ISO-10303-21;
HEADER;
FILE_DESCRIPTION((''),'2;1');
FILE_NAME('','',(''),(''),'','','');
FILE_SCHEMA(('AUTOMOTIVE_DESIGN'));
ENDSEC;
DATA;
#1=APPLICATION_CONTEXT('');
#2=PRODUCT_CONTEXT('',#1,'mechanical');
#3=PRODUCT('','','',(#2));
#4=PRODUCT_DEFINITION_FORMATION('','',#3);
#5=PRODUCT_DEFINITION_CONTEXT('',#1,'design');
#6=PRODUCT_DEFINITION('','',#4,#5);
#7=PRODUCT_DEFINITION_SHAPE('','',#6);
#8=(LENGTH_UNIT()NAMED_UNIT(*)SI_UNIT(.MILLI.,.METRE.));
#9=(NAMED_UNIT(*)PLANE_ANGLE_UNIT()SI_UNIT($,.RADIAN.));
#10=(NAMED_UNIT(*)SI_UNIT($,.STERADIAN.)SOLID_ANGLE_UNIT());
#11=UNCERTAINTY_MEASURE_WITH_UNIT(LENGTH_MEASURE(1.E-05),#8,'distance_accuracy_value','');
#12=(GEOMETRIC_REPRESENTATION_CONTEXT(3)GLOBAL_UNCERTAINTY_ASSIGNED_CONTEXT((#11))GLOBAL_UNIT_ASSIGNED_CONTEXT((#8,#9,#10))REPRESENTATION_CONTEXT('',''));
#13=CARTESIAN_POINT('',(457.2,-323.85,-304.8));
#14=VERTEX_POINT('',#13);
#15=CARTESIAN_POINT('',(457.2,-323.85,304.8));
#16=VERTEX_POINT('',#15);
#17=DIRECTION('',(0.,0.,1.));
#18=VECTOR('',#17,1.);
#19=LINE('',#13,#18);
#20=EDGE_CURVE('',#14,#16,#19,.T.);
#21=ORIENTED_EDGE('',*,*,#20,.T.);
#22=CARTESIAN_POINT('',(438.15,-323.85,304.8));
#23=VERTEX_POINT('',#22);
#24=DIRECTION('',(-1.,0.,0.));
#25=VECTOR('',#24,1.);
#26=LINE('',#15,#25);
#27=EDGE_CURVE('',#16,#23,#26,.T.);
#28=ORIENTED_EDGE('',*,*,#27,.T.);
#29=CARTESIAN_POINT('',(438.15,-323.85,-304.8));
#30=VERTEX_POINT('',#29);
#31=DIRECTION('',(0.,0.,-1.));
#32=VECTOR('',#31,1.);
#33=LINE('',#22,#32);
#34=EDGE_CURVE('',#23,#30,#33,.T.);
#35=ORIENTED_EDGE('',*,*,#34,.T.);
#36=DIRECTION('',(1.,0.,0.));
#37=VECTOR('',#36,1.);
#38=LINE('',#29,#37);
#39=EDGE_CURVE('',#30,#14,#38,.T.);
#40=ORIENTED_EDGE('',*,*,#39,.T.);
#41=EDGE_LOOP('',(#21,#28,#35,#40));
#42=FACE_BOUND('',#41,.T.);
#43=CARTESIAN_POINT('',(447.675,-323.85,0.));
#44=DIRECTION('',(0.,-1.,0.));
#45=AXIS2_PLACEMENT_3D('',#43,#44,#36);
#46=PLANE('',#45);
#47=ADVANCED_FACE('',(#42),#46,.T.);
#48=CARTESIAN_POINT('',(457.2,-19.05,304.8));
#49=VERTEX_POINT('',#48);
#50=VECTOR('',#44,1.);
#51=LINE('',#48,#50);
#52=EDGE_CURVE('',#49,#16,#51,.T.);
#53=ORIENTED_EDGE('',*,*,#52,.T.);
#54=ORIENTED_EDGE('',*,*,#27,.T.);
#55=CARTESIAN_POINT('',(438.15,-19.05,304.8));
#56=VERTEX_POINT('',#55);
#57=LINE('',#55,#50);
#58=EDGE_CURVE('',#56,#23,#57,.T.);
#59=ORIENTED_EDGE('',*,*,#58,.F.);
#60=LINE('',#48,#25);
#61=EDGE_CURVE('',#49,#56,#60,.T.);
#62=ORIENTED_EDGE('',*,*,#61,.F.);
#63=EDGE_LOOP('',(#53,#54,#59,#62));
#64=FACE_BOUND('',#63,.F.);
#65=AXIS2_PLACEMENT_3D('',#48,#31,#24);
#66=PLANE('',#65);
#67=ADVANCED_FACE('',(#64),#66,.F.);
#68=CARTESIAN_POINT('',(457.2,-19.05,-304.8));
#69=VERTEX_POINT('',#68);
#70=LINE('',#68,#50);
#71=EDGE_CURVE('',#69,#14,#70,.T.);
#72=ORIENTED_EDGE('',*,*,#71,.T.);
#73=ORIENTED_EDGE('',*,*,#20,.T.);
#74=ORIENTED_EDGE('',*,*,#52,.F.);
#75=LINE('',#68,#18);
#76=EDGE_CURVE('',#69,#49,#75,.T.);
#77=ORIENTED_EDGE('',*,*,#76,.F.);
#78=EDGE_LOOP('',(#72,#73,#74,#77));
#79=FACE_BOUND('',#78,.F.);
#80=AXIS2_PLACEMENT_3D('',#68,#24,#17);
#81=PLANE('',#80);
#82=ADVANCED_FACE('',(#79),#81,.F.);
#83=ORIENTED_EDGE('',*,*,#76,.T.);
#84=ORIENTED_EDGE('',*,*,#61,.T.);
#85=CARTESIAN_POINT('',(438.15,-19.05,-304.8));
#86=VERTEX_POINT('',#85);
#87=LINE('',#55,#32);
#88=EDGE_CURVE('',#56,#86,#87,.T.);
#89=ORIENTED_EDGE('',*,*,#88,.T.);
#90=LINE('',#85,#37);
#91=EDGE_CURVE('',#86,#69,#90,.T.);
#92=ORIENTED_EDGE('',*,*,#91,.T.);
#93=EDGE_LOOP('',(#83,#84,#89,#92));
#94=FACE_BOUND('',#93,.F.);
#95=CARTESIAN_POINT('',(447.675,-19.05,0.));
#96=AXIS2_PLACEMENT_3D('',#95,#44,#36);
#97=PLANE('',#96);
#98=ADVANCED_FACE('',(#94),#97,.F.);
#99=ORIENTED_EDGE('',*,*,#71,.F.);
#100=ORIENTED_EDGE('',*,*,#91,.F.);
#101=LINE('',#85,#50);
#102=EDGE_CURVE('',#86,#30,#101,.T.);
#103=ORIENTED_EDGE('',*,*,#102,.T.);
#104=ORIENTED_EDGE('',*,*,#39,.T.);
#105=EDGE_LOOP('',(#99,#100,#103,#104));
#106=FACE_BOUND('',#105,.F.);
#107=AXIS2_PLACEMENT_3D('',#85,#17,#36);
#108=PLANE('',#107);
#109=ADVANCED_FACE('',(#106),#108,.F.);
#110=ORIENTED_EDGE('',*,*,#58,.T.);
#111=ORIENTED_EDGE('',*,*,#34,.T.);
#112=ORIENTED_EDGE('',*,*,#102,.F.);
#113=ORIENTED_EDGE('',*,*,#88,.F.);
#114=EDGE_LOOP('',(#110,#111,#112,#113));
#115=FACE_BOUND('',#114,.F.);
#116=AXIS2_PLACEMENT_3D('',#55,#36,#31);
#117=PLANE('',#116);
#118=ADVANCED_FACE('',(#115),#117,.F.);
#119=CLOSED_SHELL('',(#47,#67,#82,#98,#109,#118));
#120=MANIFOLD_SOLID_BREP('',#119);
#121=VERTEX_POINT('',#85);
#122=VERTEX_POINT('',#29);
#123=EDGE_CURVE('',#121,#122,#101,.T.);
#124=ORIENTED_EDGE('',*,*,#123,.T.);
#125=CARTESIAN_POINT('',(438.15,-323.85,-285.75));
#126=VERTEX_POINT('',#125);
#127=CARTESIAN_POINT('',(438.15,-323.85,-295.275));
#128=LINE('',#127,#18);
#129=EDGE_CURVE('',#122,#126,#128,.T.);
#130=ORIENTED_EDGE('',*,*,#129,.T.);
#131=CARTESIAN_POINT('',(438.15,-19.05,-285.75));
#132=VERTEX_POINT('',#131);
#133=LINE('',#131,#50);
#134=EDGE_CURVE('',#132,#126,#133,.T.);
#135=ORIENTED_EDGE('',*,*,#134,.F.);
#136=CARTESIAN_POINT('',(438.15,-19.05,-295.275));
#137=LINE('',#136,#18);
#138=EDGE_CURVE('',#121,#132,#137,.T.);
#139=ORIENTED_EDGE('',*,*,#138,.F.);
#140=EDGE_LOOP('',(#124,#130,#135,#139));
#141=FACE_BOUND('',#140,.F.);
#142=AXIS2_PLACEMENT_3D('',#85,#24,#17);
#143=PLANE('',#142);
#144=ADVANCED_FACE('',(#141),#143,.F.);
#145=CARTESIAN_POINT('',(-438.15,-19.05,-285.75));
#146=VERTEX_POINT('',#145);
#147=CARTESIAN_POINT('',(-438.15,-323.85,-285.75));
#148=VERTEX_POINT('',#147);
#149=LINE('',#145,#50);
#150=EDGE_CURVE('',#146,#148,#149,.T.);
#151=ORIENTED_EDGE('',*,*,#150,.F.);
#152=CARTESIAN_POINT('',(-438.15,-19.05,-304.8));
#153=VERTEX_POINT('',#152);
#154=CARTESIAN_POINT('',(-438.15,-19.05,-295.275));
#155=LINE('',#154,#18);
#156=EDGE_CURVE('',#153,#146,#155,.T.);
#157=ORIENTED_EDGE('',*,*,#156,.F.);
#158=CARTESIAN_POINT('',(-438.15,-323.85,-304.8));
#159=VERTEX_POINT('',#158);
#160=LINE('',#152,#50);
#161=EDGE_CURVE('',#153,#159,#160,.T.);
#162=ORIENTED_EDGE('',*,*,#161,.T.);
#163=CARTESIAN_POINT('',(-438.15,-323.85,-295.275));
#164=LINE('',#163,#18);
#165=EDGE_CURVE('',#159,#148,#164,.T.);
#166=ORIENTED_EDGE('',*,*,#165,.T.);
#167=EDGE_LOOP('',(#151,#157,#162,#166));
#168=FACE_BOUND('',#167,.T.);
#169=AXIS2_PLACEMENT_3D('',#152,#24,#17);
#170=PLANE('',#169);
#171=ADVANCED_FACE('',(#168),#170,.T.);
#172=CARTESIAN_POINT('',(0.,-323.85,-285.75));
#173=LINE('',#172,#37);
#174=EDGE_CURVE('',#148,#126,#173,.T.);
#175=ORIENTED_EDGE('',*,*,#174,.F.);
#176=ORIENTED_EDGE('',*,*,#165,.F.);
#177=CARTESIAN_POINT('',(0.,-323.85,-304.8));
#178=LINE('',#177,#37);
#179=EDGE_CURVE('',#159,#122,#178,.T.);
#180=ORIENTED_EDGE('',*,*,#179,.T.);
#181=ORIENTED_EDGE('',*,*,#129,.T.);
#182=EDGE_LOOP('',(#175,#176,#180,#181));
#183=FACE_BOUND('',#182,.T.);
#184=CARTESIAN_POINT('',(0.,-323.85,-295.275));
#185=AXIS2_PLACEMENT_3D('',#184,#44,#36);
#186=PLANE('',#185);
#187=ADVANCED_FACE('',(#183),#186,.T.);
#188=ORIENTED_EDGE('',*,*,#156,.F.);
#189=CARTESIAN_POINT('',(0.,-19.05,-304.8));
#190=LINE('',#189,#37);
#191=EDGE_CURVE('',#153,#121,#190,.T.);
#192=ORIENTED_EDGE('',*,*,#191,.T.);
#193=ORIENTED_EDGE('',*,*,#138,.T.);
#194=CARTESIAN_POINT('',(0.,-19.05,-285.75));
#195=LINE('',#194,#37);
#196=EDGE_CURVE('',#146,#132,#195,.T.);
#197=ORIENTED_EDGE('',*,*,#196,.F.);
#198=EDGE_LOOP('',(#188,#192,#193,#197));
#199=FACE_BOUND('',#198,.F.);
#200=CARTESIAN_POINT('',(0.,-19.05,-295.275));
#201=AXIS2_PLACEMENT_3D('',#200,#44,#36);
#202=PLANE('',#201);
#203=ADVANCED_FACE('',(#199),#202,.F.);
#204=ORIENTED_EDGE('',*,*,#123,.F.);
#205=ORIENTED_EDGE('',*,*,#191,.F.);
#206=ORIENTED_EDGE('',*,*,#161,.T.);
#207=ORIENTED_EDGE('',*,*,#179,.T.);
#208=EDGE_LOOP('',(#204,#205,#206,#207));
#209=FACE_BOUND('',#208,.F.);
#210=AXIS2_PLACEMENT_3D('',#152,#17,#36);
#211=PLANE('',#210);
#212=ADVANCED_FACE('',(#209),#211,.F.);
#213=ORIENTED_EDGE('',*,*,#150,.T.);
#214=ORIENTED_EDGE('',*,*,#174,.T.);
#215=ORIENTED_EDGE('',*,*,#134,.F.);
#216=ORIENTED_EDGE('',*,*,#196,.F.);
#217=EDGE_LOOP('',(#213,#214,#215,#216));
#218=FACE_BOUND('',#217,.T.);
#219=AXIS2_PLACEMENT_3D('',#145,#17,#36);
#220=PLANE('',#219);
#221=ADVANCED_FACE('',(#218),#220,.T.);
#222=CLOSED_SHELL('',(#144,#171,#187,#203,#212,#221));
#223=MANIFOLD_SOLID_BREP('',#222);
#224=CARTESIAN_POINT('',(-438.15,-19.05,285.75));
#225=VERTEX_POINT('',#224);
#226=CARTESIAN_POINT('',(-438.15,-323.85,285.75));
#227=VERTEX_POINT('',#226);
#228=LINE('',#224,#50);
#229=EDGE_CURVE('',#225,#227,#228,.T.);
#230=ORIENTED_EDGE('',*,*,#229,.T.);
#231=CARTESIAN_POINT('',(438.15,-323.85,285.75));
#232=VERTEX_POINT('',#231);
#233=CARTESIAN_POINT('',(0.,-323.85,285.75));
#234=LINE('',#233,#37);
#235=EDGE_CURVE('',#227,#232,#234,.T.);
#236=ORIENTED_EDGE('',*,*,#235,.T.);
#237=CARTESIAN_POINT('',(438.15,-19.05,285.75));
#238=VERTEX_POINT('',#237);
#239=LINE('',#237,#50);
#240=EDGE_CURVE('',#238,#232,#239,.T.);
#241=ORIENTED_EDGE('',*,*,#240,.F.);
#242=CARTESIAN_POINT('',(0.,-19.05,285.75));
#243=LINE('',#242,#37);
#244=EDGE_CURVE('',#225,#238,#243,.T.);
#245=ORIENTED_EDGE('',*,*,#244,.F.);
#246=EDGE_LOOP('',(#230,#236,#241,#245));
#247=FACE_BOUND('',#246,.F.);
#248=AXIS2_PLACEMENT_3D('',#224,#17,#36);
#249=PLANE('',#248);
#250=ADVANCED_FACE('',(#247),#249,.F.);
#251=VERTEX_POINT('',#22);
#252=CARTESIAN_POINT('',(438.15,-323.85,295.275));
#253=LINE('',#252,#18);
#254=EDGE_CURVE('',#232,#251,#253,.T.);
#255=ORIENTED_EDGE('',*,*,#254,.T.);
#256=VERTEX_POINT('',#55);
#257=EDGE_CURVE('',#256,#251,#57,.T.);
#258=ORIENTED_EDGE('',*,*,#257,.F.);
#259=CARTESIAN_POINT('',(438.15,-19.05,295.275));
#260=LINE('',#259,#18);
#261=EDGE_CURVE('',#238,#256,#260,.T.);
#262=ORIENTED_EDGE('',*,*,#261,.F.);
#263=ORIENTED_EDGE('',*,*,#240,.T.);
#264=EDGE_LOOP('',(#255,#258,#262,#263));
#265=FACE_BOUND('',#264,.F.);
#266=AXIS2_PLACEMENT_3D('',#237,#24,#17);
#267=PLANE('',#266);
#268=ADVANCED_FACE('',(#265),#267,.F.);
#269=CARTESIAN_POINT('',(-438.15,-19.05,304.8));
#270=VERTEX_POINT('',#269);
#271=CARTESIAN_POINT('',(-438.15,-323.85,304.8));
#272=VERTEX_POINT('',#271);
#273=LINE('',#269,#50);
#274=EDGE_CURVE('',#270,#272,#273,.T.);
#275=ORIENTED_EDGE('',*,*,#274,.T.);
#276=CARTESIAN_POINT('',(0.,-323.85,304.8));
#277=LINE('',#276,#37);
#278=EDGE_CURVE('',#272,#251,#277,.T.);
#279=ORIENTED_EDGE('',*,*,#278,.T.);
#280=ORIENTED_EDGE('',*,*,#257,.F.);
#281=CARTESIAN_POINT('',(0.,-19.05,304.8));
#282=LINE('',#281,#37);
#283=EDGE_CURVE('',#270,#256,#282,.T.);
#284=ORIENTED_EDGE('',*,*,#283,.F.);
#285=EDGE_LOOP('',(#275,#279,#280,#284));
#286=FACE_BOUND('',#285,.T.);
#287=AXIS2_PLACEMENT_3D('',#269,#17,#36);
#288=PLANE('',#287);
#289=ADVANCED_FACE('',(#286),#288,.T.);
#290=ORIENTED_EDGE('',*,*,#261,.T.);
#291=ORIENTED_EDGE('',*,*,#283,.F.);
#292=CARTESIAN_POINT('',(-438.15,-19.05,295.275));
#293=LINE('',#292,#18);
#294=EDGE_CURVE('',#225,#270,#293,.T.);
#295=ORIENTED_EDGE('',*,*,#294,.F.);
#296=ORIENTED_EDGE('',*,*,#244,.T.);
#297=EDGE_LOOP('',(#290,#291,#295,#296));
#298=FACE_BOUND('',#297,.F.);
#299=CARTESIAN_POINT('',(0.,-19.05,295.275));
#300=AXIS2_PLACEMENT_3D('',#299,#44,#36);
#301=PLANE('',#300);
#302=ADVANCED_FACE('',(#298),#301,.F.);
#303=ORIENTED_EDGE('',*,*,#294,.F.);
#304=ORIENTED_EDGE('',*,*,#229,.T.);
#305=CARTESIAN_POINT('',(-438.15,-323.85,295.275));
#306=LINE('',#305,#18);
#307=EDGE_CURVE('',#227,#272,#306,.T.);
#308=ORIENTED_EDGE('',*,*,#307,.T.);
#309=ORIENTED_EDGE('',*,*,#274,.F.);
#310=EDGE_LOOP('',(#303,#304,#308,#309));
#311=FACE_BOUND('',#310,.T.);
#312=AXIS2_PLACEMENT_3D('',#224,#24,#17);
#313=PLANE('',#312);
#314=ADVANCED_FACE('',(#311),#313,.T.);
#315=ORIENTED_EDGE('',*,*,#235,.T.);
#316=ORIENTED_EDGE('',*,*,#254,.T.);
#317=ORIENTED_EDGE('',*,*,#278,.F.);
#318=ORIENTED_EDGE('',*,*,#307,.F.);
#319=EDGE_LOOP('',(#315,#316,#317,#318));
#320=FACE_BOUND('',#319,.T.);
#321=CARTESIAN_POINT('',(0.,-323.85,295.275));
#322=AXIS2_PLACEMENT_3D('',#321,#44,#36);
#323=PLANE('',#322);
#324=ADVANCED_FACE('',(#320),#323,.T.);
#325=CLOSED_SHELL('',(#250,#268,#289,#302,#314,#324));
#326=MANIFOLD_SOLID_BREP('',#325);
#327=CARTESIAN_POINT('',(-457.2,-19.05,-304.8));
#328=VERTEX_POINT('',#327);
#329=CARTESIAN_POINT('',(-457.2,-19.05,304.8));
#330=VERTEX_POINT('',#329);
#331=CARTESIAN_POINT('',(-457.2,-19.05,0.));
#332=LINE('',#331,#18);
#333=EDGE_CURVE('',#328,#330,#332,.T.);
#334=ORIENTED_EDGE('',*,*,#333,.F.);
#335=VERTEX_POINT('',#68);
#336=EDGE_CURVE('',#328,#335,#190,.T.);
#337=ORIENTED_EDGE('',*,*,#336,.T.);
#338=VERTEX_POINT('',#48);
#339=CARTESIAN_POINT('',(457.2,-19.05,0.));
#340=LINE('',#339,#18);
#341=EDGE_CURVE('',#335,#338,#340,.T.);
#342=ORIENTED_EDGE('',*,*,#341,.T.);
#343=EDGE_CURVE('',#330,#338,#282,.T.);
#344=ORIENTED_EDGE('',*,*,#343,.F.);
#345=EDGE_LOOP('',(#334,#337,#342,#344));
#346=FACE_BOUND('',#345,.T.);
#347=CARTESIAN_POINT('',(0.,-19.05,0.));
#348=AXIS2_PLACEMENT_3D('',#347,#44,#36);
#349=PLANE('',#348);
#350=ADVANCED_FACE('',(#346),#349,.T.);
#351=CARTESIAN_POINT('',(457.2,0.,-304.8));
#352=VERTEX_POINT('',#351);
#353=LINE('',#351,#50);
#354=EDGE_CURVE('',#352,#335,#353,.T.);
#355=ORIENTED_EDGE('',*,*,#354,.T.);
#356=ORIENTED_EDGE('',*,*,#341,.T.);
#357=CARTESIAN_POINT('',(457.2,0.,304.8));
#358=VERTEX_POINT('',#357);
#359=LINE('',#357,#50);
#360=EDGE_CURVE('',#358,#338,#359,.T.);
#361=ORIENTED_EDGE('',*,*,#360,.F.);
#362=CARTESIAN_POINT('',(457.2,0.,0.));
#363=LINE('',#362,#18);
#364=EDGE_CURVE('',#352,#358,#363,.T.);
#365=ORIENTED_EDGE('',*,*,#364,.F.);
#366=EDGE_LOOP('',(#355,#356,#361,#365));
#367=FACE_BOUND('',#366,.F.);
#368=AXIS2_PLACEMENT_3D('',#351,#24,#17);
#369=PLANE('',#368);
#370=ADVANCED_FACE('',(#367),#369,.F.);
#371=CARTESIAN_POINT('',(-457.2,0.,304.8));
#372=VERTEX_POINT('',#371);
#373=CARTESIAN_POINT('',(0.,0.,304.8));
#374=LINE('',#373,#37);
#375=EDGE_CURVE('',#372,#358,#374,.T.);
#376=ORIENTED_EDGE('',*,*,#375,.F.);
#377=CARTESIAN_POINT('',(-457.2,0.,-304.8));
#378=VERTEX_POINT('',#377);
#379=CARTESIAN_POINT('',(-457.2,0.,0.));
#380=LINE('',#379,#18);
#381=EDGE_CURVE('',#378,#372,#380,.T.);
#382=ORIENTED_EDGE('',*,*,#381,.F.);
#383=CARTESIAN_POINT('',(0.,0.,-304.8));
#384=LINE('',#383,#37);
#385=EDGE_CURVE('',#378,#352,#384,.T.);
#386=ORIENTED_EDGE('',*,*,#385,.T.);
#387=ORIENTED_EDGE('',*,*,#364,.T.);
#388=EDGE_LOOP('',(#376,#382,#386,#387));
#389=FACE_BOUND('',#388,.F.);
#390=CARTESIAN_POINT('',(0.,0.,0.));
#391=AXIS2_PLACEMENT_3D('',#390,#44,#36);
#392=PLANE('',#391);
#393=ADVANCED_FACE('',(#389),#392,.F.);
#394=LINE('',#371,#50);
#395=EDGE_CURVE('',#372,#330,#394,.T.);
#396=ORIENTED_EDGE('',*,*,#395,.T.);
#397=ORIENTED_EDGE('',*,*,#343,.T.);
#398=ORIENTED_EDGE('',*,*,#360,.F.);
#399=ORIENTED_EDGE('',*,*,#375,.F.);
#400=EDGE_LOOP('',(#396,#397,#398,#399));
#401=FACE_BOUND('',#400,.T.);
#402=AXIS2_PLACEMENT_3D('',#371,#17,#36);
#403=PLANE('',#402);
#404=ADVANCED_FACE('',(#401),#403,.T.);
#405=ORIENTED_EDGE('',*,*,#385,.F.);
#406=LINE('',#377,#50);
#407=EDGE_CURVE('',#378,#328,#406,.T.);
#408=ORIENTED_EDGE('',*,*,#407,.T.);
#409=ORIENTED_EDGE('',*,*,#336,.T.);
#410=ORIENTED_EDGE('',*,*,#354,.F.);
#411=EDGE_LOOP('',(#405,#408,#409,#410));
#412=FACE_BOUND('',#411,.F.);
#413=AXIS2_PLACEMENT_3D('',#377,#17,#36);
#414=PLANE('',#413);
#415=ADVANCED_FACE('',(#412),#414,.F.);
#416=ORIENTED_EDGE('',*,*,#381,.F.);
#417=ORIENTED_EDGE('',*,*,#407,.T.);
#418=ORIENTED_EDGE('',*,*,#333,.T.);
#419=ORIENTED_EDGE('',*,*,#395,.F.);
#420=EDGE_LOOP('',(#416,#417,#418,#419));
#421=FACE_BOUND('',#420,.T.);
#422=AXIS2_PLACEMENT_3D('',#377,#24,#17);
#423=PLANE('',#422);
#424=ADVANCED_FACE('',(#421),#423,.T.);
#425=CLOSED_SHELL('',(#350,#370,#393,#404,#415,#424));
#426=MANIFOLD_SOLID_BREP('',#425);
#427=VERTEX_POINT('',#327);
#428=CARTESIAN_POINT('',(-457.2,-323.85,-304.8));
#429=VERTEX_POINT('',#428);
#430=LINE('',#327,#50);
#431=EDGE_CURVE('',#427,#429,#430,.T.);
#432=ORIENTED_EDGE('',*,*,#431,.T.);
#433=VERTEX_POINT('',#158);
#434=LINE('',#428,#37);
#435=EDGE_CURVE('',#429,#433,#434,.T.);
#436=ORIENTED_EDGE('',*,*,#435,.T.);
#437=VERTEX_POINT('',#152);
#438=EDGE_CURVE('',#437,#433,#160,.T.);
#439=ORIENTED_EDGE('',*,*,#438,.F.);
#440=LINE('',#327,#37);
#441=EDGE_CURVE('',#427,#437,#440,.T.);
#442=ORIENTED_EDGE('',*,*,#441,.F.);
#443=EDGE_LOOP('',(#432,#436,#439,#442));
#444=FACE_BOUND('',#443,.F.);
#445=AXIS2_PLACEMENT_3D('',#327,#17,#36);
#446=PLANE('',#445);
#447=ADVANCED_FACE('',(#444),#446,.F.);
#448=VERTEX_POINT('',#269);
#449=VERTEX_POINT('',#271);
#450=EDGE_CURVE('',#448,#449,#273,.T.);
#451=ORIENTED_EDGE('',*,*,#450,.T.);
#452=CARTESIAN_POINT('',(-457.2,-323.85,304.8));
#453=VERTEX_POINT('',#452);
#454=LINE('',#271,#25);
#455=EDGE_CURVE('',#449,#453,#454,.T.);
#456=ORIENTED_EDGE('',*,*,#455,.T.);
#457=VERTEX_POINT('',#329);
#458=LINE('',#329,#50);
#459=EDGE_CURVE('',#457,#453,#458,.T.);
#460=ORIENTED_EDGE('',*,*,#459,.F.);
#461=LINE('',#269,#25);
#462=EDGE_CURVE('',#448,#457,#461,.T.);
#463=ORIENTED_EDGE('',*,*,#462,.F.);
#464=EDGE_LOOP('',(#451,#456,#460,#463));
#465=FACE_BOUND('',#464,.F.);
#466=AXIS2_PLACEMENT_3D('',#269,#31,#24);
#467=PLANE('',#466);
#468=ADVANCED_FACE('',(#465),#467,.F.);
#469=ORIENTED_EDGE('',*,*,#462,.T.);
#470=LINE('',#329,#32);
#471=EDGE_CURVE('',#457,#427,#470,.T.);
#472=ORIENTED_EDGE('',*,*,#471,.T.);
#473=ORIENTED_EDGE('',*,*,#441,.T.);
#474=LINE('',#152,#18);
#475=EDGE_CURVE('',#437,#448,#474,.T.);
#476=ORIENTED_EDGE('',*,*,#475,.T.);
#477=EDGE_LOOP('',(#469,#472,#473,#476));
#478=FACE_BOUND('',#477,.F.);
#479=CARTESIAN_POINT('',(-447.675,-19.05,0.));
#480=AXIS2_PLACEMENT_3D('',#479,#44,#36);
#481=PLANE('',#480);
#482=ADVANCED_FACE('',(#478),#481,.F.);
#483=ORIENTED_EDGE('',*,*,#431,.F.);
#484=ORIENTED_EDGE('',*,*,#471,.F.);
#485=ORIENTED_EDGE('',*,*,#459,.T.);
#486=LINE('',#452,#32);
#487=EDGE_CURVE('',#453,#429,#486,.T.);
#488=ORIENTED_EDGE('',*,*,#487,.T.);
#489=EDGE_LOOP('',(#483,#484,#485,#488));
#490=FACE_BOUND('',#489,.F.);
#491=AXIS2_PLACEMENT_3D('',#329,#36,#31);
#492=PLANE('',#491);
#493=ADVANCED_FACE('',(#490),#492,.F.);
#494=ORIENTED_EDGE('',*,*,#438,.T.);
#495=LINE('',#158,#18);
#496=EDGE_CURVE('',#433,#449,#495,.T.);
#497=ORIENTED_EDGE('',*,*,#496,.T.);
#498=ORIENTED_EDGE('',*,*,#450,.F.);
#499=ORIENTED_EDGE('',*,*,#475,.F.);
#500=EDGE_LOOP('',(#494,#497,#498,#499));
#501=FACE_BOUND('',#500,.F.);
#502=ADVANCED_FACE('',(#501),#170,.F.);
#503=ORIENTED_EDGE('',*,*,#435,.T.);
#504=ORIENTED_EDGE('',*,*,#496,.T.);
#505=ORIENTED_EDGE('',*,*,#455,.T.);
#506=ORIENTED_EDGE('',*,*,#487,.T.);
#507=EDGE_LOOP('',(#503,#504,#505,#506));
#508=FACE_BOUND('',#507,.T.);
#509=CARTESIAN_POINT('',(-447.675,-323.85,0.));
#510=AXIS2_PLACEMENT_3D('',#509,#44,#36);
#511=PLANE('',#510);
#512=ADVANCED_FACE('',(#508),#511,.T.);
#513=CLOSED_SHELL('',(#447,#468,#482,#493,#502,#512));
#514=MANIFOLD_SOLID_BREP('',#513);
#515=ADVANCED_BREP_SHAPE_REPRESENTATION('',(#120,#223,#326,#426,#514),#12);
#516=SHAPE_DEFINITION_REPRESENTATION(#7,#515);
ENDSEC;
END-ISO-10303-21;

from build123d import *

# Parameters (mm, degrees)
F0_W     = 914.4
F0_H     = 609.6
F1_DEPTH = 19.05
F3_DEPTH = 304.8
F2_W     = 876.3
F2_H     = 19.05
F4_DEPTH = 304.8
F5_DEPTH = 304.8
F6_DEPTH = 304.8


with BuildPart() as f1:
    # F0 (on Front) → F1 (new body)
    with BuildSketch(Plane.XZ):
        Rectangle(F0_W, F0_H)
    extrude(amount=F1_DEPTH)


with BuildPart() as f3:
    # F2 (on face) → F3 (new body)
    with BuildSketch(Plane.XZ.offset(19.05)):
        Polygon((-457.2, 304.8), (-457.2, -304.8), (-438.15, -304.8), (-438.15, -285.75), (-438.15, 285.75), (-438.15, 304.8), align=None)
    extrude(amount=F3_DEPTH)


with BuildPart() as f4:
    # F2 (on face) → F4 (new body, through all)
    with BuildSketch(Plane.XZ.offset(19.05)):
        with Locations((0, -295.275)):
            Rectangle(F2_W, F2_H)
    extrude(amount=F4_DEPTH)


with BuildPart() as f5:
    # F2 (on face) → F5 (new body, through all)
    with BuildSketch(Plane.XZ.offset(19.05)):
        with Locations((0, 295.275)):
            Rectangle(F2_W, F2_H)
    extrude(amount=F5_DEPTH)


with BuildPart() as f6:
    # F2 (on face) → F6 (new body, through all)
    with BuildSketch(Plane.XZ.offset(19.05)):
        Polygon((438.15, -285.75), (438.15, -304.8), (457.2, -304.8), (457.2, 304.8), (438.15, 304.8), (438.15, 285.75), align=None)
    extrude(amount=F6_DEPTH)


solid = Compound([f1.part, f3.part, f4.part, f5.part, f6.part])
